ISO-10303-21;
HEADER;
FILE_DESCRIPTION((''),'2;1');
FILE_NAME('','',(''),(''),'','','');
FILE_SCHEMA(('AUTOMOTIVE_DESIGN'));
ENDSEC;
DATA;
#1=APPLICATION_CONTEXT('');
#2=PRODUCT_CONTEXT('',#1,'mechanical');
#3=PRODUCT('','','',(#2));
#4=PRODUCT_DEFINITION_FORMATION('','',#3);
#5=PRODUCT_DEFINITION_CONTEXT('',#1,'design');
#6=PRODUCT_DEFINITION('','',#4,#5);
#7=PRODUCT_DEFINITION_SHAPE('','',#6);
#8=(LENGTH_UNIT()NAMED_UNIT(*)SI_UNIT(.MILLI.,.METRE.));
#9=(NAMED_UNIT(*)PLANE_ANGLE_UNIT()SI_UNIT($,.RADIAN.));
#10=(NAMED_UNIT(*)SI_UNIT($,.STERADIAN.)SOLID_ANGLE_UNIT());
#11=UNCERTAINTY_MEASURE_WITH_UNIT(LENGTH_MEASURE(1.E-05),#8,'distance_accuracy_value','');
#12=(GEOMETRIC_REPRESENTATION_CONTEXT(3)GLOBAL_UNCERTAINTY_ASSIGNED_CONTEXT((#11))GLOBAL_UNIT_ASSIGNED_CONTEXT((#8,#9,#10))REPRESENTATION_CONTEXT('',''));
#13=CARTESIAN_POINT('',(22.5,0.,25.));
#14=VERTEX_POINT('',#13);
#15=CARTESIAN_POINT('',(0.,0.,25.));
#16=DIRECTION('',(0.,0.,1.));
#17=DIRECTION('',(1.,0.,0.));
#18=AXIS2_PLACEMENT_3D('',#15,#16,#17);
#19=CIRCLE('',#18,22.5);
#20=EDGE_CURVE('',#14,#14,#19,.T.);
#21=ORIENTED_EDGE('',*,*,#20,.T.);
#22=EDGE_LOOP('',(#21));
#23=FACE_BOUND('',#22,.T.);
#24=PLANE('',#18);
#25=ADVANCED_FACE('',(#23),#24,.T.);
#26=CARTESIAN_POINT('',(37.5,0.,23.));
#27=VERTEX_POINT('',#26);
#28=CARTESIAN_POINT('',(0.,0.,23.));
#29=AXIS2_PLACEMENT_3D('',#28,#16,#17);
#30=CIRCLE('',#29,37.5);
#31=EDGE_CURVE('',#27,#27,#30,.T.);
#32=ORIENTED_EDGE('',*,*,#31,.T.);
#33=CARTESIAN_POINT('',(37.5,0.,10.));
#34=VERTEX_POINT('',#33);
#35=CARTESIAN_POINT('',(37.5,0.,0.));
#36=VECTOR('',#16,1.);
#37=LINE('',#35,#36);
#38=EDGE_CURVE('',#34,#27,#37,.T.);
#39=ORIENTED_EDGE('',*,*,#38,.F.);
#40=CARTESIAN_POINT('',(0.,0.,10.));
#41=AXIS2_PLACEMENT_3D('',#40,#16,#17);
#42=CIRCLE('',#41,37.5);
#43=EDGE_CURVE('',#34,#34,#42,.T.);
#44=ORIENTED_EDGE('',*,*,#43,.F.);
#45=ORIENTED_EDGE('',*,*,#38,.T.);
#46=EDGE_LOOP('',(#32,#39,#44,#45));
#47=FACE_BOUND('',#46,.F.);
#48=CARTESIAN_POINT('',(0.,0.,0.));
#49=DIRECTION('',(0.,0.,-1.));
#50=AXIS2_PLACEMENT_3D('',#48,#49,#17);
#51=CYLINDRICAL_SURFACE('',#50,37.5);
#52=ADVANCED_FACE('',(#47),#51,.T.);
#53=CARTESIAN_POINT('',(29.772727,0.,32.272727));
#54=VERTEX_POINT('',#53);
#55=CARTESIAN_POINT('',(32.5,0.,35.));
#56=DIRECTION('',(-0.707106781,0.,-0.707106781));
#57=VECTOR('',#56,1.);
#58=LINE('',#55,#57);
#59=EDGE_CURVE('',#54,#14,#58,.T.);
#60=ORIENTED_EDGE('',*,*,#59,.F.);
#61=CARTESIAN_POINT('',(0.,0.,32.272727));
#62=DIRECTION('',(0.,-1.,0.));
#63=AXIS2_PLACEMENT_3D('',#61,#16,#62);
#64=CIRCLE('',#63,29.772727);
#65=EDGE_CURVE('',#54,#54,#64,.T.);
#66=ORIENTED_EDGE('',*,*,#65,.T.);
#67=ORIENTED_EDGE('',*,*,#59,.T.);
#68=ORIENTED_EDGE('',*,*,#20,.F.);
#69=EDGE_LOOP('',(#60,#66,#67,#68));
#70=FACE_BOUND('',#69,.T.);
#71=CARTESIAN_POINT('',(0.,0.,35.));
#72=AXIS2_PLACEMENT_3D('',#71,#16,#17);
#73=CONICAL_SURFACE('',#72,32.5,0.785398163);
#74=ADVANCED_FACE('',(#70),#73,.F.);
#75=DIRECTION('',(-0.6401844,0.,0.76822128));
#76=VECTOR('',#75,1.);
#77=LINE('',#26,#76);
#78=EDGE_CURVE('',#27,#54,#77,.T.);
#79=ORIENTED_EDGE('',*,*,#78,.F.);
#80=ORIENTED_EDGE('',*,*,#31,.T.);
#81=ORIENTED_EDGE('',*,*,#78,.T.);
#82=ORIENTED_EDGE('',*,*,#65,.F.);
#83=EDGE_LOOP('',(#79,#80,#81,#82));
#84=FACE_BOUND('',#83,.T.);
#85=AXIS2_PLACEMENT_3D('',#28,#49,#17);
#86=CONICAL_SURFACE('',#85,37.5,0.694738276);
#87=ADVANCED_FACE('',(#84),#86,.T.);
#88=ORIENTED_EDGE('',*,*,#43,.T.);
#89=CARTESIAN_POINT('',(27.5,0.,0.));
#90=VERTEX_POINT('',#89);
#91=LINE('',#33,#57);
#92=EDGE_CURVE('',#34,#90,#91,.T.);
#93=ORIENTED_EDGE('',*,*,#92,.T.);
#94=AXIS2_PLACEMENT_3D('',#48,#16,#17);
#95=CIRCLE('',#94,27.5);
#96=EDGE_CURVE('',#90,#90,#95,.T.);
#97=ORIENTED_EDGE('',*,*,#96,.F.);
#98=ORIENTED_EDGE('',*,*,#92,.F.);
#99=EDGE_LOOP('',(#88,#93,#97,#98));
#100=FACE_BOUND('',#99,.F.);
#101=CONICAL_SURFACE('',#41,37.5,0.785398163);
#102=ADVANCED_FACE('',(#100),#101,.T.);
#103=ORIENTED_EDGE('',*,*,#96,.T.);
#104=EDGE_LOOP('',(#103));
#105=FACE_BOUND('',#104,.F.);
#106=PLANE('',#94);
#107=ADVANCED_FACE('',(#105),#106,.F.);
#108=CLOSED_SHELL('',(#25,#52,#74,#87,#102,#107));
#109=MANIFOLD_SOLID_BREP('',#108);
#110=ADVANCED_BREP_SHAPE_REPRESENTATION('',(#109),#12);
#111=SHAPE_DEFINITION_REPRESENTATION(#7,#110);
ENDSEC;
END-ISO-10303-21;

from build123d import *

# Parameters (mm, degrees)
F0_R     = 37.5
F1_DEPTH = 35
F3_R     = 22.5
F4_DEPTH = 10


# Not quite as in the source:
# - a fillet or chamfer that OpenCascade refuses, or shapes differently, is made with other operations: its cross-section is extruded or revolved along the edge and cut away or added


with BuildPart() as f1:
    # F0 (on Top) → F1 (new body)
    with BuildSketch(Plane.XY):
        Circle(F0_R)
    extrude(amount=F1_DEPTH)

    # F2: chamfer of 10 x 12 on 1 edges, made by hand

    # F2_s1 → F2_t2 (revolve, cut)
    with BuildSketch(Plane.XZ):
        Polygon((37.5, 23), (27.5, 35), (37.5, 35), align=None)
    revolve(axis=Axis((0, 0, 35), (0, 0, 1)), mode=Mode.SUBTRACT)

    # F3 (on face) → F4 (cut)
    with BuildSketch(Plane.XY.offset(35)):
        Circle(F3_R)
    extrude(amount=-F4_DEPTH, mode=Mode.SUBTRACT)

    # F5: chamfer of 10 on 2 edges, made by hand


with BuildPart() as f5_tool2:
    # F5_s3 → F5_t4 (revolve)
    with BuildSketch(Plane.XZ):
        Polygon((32.5, 35), (22.5, 25), (22.5, 35), align=None)
    revolve(axis=Axis((0, 0, 35), (0, 0, 1)))

    split(bisect_by=Plane.XY.offset(25), keep=Keep.TOP)


with BuildPart() as f1_1:
    add(f1.part)

    # F5_t1: cut F5_tool2
    add(f5_tool2.part, mode=Mode.SUBTRACT)

    # F5_s6 → F5_t7 (revolve, cut)
    with BuildSketch(Plane.XZ):
        Polygon((37.5, 10), (27.5, 0), (37.5, 0), align=None)
    revolve(axis=Axis((0, 0, 0), (0, 0, 1)), mode=Mode.SUBTRACT)


solid = f1_1.part
